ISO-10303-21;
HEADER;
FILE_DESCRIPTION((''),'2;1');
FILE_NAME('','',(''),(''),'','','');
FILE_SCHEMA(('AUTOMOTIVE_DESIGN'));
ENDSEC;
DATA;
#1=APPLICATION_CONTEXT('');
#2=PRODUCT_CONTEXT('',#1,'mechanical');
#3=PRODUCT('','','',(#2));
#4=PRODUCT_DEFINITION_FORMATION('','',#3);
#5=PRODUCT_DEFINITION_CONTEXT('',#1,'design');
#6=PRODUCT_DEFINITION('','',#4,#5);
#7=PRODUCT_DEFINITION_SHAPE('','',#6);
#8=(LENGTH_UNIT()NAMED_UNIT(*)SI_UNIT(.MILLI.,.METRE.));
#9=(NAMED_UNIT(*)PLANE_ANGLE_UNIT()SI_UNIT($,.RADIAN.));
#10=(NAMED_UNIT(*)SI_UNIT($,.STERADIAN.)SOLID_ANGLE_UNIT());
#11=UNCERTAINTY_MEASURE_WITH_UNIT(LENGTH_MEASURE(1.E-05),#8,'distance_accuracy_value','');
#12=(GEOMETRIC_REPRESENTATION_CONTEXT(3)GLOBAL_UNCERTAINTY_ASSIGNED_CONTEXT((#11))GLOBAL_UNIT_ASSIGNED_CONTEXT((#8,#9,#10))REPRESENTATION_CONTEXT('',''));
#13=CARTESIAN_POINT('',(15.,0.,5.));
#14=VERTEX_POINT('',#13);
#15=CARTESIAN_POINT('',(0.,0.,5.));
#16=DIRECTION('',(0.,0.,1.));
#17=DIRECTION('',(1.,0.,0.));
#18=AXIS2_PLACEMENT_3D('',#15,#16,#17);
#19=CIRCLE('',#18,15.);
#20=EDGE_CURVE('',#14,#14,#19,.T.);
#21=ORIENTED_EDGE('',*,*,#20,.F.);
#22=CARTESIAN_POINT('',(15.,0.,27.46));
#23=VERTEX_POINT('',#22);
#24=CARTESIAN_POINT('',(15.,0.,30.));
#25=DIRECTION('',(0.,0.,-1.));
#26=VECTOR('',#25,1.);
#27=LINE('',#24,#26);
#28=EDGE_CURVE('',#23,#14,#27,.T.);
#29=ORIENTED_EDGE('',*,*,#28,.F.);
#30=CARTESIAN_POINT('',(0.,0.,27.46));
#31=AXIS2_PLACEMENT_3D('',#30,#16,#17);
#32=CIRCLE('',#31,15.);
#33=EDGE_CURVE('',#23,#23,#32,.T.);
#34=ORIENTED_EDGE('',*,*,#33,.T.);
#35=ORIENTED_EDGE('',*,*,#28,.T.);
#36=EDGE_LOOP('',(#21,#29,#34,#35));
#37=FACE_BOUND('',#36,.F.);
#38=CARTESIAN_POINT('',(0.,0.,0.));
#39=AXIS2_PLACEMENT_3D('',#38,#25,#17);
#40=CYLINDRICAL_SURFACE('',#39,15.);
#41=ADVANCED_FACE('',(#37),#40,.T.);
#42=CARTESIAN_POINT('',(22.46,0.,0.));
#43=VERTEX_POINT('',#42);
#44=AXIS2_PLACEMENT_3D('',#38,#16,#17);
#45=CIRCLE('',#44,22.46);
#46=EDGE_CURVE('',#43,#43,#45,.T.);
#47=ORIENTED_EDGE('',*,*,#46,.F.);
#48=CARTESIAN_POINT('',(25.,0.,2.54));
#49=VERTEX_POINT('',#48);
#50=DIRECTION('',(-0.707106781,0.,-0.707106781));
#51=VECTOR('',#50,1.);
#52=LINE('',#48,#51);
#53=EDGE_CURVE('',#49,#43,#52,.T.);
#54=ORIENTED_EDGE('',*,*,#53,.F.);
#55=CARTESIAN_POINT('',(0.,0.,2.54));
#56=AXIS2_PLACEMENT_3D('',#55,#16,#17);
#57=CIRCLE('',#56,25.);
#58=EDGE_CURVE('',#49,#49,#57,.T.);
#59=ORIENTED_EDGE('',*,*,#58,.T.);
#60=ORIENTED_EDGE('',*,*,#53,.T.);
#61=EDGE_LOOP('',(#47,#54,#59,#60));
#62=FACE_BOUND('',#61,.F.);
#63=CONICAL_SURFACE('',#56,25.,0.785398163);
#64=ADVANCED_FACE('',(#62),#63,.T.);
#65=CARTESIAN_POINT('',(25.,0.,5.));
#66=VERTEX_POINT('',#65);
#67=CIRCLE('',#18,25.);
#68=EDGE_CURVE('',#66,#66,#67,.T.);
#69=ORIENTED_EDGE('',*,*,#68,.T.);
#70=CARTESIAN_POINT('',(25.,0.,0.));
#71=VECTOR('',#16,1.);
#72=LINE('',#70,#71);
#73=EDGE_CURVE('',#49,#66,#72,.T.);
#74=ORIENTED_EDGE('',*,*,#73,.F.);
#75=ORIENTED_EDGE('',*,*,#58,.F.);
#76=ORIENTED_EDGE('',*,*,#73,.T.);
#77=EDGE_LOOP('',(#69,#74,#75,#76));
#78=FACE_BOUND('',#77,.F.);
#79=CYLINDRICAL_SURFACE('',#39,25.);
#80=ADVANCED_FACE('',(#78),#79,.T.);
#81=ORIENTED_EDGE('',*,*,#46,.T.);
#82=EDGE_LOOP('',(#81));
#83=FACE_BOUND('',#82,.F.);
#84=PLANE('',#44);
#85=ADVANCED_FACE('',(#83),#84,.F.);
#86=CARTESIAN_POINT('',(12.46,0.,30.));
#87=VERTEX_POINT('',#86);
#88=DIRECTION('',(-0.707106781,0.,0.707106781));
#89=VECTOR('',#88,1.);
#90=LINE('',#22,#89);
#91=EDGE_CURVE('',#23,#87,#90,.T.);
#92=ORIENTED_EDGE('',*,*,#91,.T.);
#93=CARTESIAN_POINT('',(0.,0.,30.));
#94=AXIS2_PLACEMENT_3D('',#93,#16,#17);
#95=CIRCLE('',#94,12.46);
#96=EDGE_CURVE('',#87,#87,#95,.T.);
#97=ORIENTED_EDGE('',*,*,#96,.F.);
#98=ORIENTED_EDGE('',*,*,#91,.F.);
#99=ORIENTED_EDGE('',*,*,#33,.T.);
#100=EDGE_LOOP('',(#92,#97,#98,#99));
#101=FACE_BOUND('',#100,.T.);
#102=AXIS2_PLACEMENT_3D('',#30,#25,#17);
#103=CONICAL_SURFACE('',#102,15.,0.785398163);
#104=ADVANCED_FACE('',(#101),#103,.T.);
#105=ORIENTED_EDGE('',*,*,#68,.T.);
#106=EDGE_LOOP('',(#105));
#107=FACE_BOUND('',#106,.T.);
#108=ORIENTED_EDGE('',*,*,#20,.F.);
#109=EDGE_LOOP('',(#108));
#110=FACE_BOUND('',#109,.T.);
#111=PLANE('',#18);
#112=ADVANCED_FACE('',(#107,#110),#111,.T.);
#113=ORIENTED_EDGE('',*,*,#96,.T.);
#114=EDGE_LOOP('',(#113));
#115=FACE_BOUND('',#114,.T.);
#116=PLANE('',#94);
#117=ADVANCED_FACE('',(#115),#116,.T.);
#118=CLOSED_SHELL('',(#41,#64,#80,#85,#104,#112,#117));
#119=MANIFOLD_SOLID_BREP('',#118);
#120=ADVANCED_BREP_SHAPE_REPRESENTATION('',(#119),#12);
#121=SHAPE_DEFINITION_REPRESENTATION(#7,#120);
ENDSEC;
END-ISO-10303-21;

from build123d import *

# Parameters (mm, degrees)
F0_R      = 15
F1_DEPTH  = 25
F0_R_2    = 25
F1_FACE_R = 15
F2_DEPTH  = 5
F3_SIZE   = 2.54
F4_SIZE   = 2.54


with BuildPart() as f1:
    # F0 (on Top) → F1 (new body)
    with BuildSketch(Plane.XY):
        Circle(F0_R)
    extrude(amount=F1_DEPTH)

    # F0 (on Top) + F1_face (on face) → F2 (join)
    with BuildSketch(Plane.XY):
        Circle(F0_R_2)
        Circle(F0_R, mode=Mode.SUBTRACT)
    with BuildSketch(Plane.XY.offset(25)):
        Circle(F1_FACE_R)
    extrude(amount=F2_DEPTH)

    # F3
    f3_edges = [f1.edges().sort_by_distance(p)[0] for p in [
        (-25, 0, 0),
    ]]
    chamfer(f3_edges, length=F3_SIZE)

    # F4
    f4_edges = [f1.edges().sort_by_distance(p)[0] for p in [
        (-15, 0, 30),
    ]]
    chamfer(f4_edges, length=F4_SIZE)


solid = f1.part
